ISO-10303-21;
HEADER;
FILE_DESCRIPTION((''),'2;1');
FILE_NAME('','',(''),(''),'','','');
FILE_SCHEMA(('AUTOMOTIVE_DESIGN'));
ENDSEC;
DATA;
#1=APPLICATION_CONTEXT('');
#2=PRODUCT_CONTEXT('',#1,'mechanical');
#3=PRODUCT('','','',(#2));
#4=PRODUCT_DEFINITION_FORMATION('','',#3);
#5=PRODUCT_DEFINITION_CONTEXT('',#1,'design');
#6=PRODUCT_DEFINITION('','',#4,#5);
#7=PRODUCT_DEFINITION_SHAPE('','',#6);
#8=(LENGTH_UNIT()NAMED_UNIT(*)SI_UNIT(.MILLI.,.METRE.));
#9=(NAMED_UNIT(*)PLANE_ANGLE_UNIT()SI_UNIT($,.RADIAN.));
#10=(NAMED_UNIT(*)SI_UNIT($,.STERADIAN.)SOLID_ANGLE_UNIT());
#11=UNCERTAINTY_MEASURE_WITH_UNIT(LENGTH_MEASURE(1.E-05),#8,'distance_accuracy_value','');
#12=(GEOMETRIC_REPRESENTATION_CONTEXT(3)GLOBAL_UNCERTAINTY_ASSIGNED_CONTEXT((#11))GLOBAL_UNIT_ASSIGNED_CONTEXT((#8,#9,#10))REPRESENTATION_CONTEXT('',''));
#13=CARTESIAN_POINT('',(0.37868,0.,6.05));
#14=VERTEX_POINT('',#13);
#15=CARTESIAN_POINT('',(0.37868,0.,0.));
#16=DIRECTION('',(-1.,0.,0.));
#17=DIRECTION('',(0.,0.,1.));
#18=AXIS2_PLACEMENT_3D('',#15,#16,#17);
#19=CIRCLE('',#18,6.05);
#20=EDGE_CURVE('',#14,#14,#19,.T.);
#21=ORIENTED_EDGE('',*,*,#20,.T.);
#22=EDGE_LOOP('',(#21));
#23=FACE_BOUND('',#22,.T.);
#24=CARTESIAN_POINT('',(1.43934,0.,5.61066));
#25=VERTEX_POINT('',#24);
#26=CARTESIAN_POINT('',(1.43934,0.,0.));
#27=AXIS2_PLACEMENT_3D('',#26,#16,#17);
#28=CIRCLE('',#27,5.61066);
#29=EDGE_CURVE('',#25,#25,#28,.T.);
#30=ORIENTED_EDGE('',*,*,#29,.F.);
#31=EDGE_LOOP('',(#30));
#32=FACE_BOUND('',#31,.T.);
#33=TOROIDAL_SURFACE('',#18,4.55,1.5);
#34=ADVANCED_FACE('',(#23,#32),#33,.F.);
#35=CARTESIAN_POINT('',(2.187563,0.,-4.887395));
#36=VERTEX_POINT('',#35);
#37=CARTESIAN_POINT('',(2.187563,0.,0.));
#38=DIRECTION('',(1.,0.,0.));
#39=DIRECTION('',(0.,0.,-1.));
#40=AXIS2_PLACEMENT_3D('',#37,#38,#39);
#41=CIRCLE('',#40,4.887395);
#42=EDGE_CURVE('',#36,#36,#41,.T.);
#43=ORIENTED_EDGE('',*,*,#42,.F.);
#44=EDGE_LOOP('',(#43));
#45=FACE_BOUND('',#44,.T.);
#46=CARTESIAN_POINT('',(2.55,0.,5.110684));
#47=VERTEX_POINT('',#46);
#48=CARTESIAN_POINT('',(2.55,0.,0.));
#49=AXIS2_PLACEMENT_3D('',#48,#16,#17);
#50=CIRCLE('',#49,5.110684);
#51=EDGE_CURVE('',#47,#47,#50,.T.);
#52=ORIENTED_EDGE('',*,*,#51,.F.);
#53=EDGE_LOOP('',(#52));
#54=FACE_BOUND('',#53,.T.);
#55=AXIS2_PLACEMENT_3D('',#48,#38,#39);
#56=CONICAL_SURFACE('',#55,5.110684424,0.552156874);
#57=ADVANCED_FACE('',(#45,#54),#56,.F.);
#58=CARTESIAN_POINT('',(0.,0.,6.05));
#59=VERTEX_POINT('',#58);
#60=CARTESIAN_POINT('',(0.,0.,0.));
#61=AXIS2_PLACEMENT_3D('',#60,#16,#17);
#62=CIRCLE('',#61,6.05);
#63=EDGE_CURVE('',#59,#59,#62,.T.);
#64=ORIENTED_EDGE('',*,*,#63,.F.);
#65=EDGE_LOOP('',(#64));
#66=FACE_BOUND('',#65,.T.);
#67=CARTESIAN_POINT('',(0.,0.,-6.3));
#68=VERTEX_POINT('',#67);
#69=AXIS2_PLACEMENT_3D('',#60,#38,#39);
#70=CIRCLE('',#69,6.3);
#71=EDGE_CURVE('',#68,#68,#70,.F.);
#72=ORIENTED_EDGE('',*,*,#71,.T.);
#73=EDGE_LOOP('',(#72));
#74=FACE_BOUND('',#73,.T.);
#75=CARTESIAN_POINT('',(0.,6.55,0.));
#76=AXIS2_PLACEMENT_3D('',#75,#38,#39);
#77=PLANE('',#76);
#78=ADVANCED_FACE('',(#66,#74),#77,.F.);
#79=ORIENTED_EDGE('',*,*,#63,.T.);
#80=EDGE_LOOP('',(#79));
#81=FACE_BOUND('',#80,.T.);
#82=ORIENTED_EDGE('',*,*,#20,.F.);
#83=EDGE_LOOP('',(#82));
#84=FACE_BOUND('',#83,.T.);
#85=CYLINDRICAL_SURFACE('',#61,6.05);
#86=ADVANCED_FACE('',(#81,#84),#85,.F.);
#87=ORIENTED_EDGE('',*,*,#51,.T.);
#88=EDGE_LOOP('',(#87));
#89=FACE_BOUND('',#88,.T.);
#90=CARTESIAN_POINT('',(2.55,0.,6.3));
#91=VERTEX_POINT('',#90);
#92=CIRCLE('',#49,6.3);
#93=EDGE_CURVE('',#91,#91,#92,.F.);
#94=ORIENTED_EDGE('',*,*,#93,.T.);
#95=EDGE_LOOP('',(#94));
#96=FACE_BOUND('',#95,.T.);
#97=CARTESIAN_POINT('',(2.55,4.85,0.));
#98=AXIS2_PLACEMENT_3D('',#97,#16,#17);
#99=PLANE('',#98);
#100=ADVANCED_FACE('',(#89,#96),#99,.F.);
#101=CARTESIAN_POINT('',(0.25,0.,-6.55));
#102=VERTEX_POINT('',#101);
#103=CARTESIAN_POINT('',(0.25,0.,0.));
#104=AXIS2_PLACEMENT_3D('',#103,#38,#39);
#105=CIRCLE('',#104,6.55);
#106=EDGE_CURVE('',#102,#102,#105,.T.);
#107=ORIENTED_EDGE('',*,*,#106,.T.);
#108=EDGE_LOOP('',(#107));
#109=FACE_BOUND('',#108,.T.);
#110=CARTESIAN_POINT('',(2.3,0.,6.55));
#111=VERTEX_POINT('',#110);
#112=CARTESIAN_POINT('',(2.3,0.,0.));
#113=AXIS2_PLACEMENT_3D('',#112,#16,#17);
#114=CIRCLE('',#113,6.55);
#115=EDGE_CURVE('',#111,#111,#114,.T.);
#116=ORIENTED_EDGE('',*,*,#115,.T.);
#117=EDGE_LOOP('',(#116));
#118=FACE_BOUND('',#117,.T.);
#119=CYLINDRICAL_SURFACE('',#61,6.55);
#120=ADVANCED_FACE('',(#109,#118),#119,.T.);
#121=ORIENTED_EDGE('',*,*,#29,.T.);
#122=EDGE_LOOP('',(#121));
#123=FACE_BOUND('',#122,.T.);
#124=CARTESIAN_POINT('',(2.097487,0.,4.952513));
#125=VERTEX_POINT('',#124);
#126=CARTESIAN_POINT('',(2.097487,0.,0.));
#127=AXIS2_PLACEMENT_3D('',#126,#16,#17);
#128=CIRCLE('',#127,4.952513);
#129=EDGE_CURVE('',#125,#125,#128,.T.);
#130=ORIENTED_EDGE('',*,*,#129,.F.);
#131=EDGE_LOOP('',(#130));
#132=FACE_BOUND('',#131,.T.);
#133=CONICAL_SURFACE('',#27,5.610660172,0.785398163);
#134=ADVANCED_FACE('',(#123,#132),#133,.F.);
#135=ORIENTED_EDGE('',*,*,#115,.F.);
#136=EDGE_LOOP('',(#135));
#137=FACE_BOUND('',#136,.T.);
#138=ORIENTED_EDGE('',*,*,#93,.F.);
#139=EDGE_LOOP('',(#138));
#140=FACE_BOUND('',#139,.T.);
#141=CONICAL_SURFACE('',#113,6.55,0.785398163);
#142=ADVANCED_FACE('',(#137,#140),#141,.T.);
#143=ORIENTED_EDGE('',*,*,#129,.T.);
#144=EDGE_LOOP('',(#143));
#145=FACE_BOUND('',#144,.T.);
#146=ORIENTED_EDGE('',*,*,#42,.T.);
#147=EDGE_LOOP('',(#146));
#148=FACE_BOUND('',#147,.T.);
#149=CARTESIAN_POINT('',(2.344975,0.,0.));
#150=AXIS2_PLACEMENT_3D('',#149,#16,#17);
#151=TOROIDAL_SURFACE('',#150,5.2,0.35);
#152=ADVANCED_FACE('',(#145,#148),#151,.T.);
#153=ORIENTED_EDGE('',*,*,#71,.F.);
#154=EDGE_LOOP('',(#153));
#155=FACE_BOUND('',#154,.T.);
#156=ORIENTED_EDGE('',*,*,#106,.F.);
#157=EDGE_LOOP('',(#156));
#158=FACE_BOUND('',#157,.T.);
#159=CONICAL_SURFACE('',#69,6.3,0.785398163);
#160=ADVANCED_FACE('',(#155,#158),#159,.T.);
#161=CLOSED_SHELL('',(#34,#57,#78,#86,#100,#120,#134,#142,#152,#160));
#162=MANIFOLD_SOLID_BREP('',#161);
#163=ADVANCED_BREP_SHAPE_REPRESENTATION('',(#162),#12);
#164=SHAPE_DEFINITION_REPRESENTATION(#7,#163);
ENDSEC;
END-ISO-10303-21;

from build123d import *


with BuildPart() as part:
    # Çizim1 → Döndür1 (revolve)
    with BuildSketch(Plane.XY, mode=Mode.PRIVATE) as d_nd_r1_sk:
        with BuildLine():
            Line((0, 6.55), (0, 6.05))
            Line((0, 6.05), (0.378679656, 6.05))
            ThreePointArc((0.378679656, 6.05), (0.952704805, 5.935819299), (1.439339828, 5.610660172))
            Line((1.439339828, 5.610660172), (2.097487373, 4.952512627))
            ThreePointArc((2.097487373, 4.952512627), (2.211035546, 4.876642164), (2.344974747, 4.85))
            Line((2.344974747, 4.85), (2.55, 4.85))
            Line((2.55, 4.85), (2.55, 6.55))
            Line((2.55, 6.55), (0, 6.55))
        make_face()
    revolve(d_nd_r1_sk.sketch.rotate(Axis((0, 0, 0), (1, 0, 0)), 90), axis=Axis((0, 0, 0), (1, 0, 0)))

    # Pah1: read off the stored shape, not the designer's step
    # Pah1 outline → Pah1 (revolve, cut)
    with BuildSketch(Plane.YX):
        Polygon((4.887395483, 2.187563133), (5.110684424, 2.55), (4.85, 2.55), (4.85, 2.187563133), align=None)
        Polygon((6.55, 2.55), (6.3, 2.55), (6.55, 2.3), align=None)
        Polygon((6.55, 0), (6.55, 0.25), (6.3, 0), align=None)
    revolve(axis=Axis((0, 0, 0), (1, 0, 0)), mode=Mode.SUBTRACT)


solid = part.part
